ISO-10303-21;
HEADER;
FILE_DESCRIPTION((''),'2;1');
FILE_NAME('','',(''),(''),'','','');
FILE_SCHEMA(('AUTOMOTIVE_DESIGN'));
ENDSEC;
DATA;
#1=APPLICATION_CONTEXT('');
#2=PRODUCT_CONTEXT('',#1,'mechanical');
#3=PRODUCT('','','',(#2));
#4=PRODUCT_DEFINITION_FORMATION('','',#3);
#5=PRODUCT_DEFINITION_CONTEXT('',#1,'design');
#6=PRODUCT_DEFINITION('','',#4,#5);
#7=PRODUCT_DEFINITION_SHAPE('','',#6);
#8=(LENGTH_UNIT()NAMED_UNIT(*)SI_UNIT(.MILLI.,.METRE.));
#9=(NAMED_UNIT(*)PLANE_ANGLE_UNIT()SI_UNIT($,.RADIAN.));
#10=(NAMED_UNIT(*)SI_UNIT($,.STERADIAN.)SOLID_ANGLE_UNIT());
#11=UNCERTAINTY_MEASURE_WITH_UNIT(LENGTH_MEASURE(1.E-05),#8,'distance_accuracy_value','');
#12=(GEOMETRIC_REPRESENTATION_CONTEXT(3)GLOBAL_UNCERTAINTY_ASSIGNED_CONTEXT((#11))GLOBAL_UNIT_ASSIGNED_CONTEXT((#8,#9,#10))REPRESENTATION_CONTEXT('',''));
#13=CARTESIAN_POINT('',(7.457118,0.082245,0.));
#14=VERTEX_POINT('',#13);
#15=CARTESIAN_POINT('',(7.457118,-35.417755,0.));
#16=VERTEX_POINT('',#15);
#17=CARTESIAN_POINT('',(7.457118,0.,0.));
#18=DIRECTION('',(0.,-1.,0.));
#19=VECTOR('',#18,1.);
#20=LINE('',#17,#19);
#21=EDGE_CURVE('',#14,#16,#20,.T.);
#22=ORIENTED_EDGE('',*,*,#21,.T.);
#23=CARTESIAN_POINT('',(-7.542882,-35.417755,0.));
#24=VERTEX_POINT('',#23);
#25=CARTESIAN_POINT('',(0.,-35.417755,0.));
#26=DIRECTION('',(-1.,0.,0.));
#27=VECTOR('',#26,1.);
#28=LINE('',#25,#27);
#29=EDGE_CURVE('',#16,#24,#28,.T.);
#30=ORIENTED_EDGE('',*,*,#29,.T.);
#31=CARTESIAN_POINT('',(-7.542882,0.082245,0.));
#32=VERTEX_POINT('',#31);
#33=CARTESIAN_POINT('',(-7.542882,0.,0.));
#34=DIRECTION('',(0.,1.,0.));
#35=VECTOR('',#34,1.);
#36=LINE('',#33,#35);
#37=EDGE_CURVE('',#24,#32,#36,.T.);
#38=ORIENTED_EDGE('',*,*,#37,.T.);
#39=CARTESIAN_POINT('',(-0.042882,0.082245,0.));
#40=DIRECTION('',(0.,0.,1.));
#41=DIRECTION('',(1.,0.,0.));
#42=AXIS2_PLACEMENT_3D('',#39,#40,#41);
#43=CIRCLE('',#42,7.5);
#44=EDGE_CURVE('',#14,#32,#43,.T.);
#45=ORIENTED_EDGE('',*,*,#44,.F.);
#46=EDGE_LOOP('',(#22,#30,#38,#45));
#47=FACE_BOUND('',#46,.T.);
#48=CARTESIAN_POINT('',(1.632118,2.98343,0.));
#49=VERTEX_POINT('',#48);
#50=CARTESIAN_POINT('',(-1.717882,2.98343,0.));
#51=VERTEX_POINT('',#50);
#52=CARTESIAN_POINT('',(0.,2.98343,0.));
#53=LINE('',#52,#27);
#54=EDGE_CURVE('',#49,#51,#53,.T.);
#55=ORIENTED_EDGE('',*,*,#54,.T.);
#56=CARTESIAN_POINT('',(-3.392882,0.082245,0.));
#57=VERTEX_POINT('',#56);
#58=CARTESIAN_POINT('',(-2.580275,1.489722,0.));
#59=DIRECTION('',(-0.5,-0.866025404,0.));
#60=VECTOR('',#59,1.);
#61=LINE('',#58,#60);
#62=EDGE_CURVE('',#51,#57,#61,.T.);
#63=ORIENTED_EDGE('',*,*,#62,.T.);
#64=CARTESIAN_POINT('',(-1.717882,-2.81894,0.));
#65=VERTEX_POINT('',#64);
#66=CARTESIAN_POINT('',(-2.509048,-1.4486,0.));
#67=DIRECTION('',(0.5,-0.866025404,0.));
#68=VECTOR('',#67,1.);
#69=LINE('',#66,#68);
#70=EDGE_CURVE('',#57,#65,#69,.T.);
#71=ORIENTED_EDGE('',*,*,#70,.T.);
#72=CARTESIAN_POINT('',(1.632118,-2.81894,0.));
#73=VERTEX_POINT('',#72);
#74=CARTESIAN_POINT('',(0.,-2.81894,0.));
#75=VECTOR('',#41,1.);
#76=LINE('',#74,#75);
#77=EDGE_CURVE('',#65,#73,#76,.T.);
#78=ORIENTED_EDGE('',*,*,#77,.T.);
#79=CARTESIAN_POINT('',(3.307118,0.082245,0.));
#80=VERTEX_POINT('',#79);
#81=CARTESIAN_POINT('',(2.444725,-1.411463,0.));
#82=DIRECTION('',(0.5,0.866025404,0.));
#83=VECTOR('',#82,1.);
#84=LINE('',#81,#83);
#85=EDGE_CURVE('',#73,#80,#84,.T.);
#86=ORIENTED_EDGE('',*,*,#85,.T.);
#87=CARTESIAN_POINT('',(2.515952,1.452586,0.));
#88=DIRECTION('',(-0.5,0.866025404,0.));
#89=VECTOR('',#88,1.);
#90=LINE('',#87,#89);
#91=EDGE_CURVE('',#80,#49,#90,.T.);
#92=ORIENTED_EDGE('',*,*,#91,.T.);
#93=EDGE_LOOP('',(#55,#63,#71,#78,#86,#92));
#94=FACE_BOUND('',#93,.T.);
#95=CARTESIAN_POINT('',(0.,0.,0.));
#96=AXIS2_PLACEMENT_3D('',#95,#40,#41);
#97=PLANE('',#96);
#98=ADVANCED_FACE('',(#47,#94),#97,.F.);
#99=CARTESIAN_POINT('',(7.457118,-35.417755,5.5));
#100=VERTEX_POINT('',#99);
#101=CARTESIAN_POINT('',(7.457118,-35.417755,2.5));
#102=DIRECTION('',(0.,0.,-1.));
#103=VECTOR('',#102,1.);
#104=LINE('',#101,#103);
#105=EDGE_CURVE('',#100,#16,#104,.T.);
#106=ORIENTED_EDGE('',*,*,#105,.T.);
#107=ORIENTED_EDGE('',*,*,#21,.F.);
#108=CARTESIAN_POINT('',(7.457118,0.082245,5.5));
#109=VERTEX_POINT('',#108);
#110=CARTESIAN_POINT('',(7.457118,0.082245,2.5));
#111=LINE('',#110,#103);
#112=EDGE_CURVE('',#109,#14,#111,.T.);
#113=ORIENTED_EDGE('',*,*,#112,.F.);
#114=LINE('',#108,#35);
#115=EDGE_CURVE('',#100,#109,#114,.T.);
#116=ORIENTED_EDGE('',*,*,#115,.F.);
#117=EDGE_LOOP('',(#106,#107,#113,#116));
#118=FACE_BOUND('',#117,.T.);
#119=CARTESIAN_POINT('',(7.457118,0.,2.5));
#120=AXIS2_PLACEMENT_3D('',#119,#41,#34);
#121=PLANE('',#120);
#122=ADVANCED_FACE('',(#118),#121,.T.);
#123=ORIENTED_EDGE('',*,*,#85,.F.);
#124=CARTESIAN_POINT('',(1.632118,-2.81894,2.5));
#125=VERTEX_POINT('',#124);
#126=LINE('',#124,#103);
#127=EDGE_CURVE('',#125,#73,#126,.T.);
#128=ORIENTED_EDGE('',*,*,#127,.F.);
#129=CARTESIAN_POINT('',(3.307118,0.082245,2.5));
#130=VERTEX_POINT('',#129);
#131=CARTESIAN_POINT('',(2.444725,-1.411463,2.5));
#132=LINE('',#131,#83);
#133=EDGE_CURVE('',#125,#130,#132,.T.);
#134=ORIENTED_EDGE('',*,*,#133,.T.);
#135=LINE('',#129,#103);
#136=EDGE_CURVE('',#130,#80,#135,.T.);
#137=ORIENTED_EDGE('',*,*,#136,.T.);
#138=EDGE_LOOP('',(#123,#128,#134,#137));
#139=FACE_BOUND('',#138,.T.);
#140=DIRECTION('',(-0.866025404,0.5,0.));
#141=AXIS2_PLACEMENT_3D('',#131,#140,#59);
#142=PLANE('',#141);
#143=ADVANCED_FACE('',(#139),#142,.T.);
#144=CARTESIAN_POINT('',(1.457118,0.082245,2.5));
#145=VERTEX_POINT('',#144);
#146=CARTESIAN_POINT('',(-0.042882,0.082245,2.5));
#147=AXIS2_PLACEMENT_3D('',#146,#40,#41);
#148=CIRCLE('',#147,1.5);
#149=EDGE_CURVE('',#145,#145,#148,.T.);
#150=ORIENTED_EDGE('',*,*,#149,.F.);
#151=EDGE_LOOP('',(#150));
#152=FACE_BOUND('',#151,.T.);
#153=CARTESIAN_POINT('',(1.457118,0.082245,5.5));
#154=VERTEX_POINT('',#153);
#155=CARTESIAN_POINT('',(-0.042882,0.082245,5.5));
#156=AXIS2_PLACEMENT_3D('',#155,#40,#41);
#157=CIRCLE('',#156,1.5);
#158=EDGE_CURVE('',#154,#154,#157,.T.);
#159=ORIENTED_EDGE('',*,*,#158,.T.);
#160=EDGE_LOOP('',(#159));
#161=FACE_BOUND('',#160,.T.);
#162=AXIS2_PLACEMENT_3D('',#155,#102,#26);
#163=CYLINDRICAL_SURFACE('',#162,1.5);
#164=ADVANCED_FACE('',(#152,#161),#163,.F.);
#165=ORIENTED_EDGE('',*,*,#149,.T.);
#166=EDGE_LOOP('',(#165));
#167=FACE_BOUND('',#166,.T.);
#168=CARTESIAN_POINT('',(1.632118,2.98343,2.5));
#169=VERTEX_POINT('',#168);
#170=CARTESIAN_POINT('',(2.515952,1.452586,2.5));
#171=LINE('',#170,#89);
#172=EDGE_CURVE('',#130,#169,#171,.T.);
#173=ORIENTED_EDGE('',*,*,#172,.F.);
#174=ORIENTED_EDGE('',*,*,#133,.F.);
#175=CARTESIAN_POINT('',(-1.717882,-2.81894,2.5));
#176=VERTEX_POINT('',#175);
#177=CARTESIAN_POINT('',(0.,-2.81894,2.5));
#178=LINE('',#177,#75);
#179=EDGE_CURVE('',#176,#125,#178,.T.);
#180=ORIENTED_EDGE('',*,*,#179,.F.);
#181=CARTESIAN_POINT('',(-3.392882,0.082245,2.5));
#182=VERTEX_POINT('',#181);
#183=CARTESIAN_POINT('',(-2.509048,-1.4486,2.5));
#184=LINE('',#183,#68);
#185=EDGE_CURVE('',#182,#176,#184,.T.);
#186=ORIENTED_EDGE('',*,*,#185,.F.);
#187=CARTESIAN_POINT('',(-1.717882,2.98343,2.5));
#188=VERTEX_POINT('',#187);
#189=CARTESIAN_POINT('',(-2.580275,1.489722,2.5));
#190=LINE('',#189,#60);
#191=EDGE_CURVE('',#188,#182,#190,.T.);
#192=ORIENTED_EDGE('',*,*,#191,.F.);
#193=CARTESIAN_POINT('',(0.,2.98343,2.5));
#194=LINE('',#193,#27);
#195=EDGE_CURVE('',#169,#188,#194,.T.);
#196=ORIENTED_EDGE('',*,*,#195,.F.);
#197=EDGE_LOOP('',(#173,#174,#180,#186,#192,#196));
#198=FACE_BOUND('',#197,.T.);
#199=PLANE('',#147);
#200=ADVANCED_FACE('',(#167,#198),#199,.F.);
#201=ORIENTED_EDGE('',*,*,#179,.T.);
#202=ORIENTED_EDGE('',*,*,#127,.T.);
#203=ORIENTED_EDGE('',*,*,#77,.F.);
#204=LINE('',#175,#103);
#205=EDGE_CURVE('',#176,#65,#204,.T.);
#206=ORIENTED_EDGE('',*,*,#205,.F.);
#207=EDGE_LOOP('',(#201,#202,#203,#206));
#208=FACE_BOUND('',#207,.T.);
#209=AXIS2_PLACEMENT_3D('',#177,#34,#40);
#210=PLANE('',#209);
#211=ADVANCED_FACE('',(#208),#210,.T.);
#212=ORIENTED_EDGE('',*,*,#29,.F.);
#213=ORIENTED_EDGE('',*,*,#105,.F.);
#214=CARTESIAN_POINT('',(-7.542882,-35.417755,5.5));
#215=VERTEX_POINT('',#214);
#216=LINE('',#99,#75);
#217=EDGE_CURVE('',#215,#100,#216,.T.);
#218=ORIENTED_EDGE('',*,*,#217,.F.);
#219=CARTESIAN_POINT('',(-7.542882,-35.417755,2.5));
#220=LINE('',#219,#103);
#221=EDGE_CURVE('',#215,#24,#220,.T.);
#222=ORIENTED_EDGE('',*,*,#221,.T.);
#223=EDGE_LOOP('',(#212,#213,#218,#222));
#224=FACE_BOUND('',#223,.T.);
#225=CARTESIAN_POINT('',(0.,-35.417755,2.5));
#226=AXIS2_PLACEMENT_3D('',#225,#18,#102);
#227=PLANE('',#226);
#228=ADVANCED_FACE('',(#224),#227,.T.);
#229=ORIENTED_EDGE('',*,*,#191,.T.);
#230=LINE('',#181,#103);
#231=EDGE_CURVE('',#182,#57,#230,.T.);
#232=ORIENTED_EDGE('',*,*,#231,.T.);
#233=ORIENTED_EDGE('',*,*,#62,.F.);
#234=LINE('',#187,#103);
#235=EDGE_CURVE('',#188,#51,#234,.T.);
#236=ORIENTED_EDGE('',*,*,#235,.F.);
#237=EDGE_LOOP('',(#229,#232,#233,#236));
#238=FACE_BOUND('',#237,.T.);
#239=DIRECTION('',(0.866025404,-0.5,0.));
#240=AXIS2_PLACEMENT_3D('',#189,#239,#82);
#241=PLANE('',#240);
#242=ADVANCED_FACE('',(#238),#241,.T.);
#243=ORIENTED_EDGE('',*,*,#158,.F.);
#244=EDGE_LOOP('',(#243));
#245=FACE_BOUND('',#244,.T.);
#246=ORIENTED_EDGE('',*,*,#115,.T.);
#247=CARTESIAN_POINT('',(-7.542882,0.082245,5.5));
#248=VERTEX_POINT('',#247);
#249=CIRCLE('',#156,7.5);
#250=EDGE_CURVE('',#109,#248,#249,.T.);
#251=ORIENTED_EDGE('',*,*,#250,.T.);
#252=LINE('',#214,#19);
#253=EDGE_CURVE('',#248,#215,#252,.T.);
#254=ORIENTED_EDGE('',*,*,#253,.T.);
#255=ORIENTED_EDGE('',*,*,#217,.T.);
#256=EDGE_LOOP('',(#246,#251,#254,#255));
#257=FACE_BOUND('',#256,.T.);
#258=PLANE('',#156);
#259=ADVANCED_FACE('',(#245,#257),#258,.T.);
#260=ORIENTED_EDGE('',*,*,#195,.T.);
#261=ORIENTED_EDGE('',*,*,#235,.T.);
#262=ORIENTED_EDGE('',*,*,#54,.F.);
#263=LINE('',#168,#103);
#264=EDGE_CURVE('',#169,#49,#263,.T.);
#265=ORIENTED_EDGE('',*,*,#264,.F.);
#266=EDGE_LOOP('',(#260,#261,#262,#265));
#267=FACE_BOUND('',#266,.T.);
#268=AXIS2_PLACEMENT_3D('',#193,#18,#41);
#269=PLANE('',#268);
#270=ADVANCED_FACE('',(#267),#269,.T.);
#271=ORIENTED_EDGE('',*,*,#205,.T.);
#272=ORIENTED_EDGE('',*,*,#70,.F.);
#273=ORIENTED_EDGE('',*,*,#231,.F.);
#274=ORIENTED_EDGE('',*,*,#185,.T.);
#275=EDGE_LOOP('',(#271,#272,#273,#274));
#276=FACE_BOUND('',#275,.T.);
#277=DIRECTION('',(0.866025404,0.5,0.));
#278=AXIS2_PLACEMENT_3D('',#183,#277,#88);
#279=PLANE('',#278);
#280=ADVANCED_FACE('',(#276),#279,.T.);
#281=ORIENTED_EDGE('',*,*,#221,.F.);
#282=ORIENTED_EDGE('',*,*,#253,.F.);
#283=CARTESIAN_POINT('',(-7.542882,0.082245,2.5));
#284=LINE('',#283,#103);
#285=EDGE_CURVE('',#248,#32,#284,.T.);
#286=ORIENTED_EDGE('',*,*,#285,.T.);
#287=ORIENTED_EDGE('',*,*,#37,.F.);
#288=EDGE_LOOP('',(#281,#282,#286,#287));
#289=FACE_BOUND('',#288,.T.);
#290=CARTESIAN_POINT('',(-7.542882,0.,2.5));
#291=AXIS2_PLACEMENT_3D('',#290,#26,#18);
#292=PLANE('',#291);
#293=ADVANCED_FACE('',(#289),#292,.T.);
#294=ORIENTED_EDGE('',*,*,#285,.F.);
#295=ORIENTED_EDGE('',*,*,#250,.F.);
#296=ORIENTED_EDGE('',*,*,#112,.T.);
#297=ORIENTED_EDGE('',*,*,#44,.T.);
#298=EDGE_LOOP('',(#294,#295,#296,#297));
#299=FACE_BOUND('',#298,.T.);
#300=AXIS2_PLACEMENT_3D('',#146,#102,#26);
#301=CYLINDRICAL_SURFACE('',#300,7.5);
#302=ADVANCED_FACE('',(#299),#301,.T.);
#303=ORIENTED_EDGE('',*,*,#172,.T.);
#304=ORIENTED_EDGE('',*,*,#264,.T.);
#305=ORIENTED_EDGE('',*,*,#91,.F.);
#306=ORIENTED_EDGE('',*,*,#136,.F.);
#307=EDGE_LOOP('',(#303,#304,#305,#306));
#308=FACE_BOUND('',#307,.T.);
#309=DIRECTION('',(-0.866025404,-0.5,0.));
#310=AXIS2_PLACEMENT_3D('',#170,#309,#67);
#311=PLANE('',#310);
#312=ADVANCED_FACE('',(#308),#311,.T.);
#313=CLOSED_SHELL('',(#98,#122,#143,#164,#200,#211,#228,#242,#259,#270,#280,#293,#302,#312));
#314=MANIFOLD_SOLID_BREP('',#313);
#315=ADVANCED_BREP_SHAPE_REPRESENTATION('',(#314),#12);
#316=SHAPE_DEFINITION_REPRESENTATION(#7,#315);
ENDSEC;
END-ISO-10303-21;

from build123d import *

# Parameters (mm, degrees)
BOSS_EXTRUDE1_DEPTH = 2.5
SKETCH3_R           = 1.5
BOSS_EXTRUDE2_DEPTH = 3


with BuildPart() as part:
    # Sketch1 → Boss-Extrude1 (new body)
    with BuildSketch(Plane.XY):
        with BuildLine():
            ThreePointArc((7.457118183, 0.082245335), (-0.042881817, 7.582245335), (-7.542881817, 0.082245335))
            Line((-7.542881817, 0.082245335), (-7.542881817, -35.417754665))
            Line((-7.542881817, -35.417754665), (7.457118183, -35.417754665))
            Line((7.457118183, -35.417754665), (7.457118183, 0.082245335))
        make_face()
        Polygon((1.632118183, 2.983430437), (3.307118183, 0.082245335), (1.632118183, -2.818939768), (-0.042881817, -2.818939768), (-1.717881817, -2.818939768), (-3.392881817, 0.082245335), (-1.717881817, 2.983430437), (-0.042881817, 2.983430437), align=None, mode=Mode.SUBTRACT)
    extrude(amount=BOSS_EXTRUDE1_DEPTH)

    # Sketch3 → Boss-Extrude2 (add)
    with BuildSketch(Plane.XY.offset(2.5)):
        with BuildLine():
            Line((7.457118183, 0.082245335), (7.457118183, -35.417754665))
            Line((7.457118183, -35.417754665), (-7.542881817, -35.417754665))
            Line((-7.542881817, -35.417754665), (-7.542881817, 0.082245335))
            ThreePointArc((-7.542881817, 0.082245335), (-0.042881817, 7.582245335), (7.457118183, 0.082245335))
        make_face()
        with Locations((-0.042881817, 0.082245335)):
            Circle(SKETCH3_R, mode=Mode.SUBTRACT)
    extrude(amount=BOSS_EXTRUDE2_DEPTH)


solid = part.part
